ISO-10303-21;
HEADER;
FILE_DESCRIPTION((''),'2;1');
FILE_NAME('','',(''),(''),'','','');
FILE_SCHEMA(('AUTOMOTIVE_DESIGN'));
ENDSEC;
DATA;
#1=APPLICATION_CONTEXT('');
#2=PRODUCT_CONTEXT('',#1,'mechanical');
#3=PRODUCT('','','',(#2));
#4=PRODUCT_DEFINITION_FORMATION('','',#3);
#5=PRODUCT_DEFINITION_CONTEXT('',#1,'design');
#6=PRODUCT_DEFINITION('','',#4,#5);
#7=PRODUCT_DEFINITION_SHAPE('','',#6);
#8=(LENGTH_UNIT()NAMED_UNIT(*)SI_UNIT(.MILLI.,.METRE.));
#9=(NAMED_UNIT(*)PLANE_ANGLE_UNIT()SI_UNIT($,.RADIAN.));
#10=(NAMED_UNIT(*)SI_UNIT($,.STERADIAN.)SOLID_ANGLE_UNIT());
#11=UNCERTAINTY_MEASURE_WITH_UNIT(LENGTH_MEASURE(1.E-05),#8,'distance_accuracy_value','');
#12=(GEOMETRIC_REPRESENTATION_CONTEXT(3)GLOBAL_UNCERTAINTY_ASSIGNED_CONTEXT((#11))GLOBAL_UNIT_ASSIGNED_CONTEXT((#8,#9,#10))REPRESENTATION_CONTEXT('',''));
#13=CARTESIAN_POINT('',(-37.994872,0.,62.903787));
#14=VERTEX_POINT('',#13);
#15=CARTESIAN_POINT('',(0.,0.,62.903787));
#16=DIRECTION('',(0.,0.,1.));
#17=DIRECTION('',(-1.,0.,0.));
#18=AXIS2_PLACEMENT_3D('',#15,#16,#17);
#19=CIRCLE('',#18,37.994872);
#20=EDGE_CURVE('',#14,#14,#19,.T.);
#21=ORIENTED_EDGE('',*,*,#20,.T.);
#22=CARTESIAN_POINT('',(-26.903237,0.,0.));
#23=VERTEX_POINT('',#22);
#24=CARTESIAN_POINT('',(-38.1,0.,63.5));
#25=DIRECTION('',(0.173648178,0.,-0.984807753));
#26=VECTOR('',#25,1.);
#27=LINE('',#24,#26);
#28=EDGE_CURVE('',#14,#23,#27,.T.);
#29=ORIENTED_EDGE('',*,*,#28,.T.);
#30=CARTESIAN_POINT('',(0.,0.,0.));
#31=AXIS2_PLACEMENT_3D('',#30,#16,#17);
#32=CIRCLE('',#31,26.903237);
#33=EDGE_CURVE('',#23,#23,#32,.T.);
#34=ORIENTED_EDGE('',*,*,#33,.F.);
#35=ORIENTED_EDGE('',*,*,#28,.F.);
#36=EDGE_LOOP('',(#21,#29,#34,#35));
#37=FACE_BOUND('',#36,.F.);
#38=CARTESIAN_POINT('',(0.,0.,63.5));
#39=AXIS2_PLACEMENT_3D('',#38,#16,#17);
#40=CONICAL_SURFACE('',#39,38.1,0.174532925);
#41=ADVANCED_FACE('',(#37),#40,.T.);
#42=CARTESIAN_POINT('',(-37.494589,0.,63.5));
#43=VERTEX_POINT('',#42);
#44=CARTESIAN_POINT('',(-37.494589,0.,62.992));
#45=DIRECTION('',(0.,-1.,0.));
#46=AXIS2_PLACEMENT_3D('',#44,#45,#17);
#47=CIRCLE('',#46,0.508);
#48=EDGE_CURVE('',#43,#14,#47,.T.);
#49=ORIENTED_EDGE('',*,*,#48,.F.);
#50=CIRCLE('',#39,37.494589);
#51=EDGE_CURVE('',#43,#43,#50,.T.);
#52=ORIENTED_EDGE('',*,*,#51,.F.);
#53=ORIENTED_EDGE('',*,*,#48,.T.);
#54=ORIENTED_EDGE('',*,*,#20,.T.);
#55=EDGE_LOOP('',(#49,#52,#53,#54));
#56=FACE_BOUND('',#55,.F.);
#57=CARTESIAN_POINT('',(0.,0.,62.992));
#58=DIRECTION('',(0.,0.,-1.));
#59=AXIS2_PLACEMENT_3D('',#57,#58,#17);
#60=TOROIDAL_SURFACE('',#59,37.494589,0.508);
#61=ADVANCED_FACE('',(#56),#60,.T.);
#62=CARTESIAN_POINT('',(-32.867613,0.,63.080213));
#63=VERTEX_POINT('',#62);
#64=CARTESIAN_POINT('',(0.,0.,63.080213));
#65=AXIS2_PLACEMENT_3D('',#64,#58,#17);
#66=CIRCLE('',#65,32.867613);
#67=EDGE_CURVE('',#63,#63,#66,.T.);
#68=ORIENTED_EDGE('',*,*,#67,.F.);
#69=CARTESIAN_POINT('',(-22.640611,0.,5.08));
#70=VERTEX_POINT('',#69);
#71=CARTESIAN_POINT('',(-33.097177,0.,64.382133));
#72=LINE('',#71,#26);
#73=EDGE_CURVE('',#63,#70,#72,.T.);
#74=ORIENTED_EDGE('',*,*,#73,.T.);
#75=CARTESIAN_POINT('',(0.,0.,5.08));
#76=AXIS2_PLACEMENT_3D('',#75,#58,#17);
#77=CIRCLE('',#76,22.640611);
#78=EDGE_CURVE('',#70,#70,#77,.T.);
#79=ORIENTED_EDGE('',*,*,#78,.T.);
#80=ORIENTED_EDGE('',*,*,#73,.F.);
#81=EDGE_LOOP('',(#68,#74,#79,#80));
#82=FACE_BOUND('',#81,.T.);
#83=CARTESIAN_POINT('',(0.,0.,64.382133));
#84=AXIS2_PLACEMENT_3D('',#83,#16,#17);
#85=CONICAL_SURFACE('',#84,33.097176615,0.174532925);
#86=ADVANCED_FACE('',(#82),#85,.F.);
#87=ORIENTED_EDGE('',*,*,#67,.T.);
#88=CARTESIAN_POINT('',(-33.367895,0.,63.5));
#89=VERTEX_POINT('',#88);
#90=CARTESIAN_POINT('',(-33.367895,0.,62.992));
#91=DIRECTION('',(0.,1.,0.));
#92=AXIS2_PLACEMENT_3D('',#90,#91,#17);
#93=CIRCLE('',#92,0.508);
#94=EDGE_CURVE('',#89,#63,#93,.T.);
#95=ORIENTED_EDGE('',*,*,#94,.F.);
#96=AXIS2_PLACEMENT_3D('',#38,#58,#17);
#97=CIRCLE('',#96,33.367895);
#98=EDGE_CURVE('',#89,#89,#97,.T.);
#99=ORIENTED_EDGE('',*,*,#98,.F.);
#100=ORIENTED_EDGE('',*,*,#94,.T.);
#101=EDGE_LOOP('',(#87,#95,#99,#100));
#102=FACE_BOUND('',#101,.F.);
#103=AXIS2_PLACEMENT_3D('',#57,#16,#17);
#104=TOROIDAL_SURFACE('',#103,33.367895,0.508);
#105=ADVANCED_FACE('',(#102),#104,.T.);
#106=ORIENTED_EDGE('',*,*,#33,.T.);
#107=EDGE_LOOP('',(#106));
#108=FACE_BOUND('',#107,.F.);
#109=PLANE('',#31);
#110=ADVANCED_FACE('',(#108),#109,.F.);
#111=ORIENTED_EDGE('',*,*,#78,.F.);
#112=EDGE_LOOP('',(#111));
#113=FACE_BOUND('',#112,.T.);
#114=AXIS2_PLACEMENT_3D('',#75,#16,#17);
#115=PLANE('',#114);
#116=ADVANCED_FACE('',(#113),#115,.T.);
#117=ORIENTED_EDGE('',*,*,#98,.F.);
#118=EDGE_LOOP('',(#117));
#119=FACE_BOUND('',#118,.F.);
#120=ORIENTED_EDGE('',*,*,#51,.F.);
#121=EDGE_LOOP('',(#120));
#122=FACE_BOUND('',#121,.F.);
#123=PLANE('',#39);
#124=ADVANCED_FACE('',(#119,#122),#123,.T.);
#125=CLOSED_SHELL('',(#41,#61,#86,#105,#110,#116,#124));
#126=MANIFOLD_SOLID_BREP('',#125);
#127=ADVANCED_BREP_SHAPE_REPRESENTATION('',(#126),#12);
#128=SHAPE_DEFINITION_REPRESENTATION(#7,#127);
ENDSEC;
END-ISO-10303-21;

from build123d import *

# Parameters (mm, degrees)
F2_T = -5.08
F3_R = 0.508
F4_R = 0.508


# Not quite as in the source:
# - the program builds the solid bodies; features that only make, move or delete a surface that nothing else refers to are left out


with BuildPart() as f1:
    # F0 (on Front) → F1 (revolve)
    with BuildSketch(Plane.XZ):
        Polygon((0, 0), (0, 63.5), (-38.1, 63.5), (-26.903236725, 0), align=None)
    revolve(axis=Axis((0, 0, 31.75), (0, 0, 1)))

    # F2
    f2_openings = [f1.faces().sort_by_distance(p)[0] for p in [
        (0, 0, 63.5),
    ]]
    offset(amount=F2_T, openings=f2_openings)

    # F3
    f3_edges = [f1.edges().sort_by_distance(p)[0] for p in [
        (32.941633, 0, 63.5),
    ]]
    fillet(f3_edges, radius=F3_R)

    # F4
    f4_edges = [f1.edges().sort_by_distance(p)[0] for p in [
        (38.1, 0, 63.5),
    ]]
    fillet(f4_edges, radius=F4_R)


solid = f1.part
